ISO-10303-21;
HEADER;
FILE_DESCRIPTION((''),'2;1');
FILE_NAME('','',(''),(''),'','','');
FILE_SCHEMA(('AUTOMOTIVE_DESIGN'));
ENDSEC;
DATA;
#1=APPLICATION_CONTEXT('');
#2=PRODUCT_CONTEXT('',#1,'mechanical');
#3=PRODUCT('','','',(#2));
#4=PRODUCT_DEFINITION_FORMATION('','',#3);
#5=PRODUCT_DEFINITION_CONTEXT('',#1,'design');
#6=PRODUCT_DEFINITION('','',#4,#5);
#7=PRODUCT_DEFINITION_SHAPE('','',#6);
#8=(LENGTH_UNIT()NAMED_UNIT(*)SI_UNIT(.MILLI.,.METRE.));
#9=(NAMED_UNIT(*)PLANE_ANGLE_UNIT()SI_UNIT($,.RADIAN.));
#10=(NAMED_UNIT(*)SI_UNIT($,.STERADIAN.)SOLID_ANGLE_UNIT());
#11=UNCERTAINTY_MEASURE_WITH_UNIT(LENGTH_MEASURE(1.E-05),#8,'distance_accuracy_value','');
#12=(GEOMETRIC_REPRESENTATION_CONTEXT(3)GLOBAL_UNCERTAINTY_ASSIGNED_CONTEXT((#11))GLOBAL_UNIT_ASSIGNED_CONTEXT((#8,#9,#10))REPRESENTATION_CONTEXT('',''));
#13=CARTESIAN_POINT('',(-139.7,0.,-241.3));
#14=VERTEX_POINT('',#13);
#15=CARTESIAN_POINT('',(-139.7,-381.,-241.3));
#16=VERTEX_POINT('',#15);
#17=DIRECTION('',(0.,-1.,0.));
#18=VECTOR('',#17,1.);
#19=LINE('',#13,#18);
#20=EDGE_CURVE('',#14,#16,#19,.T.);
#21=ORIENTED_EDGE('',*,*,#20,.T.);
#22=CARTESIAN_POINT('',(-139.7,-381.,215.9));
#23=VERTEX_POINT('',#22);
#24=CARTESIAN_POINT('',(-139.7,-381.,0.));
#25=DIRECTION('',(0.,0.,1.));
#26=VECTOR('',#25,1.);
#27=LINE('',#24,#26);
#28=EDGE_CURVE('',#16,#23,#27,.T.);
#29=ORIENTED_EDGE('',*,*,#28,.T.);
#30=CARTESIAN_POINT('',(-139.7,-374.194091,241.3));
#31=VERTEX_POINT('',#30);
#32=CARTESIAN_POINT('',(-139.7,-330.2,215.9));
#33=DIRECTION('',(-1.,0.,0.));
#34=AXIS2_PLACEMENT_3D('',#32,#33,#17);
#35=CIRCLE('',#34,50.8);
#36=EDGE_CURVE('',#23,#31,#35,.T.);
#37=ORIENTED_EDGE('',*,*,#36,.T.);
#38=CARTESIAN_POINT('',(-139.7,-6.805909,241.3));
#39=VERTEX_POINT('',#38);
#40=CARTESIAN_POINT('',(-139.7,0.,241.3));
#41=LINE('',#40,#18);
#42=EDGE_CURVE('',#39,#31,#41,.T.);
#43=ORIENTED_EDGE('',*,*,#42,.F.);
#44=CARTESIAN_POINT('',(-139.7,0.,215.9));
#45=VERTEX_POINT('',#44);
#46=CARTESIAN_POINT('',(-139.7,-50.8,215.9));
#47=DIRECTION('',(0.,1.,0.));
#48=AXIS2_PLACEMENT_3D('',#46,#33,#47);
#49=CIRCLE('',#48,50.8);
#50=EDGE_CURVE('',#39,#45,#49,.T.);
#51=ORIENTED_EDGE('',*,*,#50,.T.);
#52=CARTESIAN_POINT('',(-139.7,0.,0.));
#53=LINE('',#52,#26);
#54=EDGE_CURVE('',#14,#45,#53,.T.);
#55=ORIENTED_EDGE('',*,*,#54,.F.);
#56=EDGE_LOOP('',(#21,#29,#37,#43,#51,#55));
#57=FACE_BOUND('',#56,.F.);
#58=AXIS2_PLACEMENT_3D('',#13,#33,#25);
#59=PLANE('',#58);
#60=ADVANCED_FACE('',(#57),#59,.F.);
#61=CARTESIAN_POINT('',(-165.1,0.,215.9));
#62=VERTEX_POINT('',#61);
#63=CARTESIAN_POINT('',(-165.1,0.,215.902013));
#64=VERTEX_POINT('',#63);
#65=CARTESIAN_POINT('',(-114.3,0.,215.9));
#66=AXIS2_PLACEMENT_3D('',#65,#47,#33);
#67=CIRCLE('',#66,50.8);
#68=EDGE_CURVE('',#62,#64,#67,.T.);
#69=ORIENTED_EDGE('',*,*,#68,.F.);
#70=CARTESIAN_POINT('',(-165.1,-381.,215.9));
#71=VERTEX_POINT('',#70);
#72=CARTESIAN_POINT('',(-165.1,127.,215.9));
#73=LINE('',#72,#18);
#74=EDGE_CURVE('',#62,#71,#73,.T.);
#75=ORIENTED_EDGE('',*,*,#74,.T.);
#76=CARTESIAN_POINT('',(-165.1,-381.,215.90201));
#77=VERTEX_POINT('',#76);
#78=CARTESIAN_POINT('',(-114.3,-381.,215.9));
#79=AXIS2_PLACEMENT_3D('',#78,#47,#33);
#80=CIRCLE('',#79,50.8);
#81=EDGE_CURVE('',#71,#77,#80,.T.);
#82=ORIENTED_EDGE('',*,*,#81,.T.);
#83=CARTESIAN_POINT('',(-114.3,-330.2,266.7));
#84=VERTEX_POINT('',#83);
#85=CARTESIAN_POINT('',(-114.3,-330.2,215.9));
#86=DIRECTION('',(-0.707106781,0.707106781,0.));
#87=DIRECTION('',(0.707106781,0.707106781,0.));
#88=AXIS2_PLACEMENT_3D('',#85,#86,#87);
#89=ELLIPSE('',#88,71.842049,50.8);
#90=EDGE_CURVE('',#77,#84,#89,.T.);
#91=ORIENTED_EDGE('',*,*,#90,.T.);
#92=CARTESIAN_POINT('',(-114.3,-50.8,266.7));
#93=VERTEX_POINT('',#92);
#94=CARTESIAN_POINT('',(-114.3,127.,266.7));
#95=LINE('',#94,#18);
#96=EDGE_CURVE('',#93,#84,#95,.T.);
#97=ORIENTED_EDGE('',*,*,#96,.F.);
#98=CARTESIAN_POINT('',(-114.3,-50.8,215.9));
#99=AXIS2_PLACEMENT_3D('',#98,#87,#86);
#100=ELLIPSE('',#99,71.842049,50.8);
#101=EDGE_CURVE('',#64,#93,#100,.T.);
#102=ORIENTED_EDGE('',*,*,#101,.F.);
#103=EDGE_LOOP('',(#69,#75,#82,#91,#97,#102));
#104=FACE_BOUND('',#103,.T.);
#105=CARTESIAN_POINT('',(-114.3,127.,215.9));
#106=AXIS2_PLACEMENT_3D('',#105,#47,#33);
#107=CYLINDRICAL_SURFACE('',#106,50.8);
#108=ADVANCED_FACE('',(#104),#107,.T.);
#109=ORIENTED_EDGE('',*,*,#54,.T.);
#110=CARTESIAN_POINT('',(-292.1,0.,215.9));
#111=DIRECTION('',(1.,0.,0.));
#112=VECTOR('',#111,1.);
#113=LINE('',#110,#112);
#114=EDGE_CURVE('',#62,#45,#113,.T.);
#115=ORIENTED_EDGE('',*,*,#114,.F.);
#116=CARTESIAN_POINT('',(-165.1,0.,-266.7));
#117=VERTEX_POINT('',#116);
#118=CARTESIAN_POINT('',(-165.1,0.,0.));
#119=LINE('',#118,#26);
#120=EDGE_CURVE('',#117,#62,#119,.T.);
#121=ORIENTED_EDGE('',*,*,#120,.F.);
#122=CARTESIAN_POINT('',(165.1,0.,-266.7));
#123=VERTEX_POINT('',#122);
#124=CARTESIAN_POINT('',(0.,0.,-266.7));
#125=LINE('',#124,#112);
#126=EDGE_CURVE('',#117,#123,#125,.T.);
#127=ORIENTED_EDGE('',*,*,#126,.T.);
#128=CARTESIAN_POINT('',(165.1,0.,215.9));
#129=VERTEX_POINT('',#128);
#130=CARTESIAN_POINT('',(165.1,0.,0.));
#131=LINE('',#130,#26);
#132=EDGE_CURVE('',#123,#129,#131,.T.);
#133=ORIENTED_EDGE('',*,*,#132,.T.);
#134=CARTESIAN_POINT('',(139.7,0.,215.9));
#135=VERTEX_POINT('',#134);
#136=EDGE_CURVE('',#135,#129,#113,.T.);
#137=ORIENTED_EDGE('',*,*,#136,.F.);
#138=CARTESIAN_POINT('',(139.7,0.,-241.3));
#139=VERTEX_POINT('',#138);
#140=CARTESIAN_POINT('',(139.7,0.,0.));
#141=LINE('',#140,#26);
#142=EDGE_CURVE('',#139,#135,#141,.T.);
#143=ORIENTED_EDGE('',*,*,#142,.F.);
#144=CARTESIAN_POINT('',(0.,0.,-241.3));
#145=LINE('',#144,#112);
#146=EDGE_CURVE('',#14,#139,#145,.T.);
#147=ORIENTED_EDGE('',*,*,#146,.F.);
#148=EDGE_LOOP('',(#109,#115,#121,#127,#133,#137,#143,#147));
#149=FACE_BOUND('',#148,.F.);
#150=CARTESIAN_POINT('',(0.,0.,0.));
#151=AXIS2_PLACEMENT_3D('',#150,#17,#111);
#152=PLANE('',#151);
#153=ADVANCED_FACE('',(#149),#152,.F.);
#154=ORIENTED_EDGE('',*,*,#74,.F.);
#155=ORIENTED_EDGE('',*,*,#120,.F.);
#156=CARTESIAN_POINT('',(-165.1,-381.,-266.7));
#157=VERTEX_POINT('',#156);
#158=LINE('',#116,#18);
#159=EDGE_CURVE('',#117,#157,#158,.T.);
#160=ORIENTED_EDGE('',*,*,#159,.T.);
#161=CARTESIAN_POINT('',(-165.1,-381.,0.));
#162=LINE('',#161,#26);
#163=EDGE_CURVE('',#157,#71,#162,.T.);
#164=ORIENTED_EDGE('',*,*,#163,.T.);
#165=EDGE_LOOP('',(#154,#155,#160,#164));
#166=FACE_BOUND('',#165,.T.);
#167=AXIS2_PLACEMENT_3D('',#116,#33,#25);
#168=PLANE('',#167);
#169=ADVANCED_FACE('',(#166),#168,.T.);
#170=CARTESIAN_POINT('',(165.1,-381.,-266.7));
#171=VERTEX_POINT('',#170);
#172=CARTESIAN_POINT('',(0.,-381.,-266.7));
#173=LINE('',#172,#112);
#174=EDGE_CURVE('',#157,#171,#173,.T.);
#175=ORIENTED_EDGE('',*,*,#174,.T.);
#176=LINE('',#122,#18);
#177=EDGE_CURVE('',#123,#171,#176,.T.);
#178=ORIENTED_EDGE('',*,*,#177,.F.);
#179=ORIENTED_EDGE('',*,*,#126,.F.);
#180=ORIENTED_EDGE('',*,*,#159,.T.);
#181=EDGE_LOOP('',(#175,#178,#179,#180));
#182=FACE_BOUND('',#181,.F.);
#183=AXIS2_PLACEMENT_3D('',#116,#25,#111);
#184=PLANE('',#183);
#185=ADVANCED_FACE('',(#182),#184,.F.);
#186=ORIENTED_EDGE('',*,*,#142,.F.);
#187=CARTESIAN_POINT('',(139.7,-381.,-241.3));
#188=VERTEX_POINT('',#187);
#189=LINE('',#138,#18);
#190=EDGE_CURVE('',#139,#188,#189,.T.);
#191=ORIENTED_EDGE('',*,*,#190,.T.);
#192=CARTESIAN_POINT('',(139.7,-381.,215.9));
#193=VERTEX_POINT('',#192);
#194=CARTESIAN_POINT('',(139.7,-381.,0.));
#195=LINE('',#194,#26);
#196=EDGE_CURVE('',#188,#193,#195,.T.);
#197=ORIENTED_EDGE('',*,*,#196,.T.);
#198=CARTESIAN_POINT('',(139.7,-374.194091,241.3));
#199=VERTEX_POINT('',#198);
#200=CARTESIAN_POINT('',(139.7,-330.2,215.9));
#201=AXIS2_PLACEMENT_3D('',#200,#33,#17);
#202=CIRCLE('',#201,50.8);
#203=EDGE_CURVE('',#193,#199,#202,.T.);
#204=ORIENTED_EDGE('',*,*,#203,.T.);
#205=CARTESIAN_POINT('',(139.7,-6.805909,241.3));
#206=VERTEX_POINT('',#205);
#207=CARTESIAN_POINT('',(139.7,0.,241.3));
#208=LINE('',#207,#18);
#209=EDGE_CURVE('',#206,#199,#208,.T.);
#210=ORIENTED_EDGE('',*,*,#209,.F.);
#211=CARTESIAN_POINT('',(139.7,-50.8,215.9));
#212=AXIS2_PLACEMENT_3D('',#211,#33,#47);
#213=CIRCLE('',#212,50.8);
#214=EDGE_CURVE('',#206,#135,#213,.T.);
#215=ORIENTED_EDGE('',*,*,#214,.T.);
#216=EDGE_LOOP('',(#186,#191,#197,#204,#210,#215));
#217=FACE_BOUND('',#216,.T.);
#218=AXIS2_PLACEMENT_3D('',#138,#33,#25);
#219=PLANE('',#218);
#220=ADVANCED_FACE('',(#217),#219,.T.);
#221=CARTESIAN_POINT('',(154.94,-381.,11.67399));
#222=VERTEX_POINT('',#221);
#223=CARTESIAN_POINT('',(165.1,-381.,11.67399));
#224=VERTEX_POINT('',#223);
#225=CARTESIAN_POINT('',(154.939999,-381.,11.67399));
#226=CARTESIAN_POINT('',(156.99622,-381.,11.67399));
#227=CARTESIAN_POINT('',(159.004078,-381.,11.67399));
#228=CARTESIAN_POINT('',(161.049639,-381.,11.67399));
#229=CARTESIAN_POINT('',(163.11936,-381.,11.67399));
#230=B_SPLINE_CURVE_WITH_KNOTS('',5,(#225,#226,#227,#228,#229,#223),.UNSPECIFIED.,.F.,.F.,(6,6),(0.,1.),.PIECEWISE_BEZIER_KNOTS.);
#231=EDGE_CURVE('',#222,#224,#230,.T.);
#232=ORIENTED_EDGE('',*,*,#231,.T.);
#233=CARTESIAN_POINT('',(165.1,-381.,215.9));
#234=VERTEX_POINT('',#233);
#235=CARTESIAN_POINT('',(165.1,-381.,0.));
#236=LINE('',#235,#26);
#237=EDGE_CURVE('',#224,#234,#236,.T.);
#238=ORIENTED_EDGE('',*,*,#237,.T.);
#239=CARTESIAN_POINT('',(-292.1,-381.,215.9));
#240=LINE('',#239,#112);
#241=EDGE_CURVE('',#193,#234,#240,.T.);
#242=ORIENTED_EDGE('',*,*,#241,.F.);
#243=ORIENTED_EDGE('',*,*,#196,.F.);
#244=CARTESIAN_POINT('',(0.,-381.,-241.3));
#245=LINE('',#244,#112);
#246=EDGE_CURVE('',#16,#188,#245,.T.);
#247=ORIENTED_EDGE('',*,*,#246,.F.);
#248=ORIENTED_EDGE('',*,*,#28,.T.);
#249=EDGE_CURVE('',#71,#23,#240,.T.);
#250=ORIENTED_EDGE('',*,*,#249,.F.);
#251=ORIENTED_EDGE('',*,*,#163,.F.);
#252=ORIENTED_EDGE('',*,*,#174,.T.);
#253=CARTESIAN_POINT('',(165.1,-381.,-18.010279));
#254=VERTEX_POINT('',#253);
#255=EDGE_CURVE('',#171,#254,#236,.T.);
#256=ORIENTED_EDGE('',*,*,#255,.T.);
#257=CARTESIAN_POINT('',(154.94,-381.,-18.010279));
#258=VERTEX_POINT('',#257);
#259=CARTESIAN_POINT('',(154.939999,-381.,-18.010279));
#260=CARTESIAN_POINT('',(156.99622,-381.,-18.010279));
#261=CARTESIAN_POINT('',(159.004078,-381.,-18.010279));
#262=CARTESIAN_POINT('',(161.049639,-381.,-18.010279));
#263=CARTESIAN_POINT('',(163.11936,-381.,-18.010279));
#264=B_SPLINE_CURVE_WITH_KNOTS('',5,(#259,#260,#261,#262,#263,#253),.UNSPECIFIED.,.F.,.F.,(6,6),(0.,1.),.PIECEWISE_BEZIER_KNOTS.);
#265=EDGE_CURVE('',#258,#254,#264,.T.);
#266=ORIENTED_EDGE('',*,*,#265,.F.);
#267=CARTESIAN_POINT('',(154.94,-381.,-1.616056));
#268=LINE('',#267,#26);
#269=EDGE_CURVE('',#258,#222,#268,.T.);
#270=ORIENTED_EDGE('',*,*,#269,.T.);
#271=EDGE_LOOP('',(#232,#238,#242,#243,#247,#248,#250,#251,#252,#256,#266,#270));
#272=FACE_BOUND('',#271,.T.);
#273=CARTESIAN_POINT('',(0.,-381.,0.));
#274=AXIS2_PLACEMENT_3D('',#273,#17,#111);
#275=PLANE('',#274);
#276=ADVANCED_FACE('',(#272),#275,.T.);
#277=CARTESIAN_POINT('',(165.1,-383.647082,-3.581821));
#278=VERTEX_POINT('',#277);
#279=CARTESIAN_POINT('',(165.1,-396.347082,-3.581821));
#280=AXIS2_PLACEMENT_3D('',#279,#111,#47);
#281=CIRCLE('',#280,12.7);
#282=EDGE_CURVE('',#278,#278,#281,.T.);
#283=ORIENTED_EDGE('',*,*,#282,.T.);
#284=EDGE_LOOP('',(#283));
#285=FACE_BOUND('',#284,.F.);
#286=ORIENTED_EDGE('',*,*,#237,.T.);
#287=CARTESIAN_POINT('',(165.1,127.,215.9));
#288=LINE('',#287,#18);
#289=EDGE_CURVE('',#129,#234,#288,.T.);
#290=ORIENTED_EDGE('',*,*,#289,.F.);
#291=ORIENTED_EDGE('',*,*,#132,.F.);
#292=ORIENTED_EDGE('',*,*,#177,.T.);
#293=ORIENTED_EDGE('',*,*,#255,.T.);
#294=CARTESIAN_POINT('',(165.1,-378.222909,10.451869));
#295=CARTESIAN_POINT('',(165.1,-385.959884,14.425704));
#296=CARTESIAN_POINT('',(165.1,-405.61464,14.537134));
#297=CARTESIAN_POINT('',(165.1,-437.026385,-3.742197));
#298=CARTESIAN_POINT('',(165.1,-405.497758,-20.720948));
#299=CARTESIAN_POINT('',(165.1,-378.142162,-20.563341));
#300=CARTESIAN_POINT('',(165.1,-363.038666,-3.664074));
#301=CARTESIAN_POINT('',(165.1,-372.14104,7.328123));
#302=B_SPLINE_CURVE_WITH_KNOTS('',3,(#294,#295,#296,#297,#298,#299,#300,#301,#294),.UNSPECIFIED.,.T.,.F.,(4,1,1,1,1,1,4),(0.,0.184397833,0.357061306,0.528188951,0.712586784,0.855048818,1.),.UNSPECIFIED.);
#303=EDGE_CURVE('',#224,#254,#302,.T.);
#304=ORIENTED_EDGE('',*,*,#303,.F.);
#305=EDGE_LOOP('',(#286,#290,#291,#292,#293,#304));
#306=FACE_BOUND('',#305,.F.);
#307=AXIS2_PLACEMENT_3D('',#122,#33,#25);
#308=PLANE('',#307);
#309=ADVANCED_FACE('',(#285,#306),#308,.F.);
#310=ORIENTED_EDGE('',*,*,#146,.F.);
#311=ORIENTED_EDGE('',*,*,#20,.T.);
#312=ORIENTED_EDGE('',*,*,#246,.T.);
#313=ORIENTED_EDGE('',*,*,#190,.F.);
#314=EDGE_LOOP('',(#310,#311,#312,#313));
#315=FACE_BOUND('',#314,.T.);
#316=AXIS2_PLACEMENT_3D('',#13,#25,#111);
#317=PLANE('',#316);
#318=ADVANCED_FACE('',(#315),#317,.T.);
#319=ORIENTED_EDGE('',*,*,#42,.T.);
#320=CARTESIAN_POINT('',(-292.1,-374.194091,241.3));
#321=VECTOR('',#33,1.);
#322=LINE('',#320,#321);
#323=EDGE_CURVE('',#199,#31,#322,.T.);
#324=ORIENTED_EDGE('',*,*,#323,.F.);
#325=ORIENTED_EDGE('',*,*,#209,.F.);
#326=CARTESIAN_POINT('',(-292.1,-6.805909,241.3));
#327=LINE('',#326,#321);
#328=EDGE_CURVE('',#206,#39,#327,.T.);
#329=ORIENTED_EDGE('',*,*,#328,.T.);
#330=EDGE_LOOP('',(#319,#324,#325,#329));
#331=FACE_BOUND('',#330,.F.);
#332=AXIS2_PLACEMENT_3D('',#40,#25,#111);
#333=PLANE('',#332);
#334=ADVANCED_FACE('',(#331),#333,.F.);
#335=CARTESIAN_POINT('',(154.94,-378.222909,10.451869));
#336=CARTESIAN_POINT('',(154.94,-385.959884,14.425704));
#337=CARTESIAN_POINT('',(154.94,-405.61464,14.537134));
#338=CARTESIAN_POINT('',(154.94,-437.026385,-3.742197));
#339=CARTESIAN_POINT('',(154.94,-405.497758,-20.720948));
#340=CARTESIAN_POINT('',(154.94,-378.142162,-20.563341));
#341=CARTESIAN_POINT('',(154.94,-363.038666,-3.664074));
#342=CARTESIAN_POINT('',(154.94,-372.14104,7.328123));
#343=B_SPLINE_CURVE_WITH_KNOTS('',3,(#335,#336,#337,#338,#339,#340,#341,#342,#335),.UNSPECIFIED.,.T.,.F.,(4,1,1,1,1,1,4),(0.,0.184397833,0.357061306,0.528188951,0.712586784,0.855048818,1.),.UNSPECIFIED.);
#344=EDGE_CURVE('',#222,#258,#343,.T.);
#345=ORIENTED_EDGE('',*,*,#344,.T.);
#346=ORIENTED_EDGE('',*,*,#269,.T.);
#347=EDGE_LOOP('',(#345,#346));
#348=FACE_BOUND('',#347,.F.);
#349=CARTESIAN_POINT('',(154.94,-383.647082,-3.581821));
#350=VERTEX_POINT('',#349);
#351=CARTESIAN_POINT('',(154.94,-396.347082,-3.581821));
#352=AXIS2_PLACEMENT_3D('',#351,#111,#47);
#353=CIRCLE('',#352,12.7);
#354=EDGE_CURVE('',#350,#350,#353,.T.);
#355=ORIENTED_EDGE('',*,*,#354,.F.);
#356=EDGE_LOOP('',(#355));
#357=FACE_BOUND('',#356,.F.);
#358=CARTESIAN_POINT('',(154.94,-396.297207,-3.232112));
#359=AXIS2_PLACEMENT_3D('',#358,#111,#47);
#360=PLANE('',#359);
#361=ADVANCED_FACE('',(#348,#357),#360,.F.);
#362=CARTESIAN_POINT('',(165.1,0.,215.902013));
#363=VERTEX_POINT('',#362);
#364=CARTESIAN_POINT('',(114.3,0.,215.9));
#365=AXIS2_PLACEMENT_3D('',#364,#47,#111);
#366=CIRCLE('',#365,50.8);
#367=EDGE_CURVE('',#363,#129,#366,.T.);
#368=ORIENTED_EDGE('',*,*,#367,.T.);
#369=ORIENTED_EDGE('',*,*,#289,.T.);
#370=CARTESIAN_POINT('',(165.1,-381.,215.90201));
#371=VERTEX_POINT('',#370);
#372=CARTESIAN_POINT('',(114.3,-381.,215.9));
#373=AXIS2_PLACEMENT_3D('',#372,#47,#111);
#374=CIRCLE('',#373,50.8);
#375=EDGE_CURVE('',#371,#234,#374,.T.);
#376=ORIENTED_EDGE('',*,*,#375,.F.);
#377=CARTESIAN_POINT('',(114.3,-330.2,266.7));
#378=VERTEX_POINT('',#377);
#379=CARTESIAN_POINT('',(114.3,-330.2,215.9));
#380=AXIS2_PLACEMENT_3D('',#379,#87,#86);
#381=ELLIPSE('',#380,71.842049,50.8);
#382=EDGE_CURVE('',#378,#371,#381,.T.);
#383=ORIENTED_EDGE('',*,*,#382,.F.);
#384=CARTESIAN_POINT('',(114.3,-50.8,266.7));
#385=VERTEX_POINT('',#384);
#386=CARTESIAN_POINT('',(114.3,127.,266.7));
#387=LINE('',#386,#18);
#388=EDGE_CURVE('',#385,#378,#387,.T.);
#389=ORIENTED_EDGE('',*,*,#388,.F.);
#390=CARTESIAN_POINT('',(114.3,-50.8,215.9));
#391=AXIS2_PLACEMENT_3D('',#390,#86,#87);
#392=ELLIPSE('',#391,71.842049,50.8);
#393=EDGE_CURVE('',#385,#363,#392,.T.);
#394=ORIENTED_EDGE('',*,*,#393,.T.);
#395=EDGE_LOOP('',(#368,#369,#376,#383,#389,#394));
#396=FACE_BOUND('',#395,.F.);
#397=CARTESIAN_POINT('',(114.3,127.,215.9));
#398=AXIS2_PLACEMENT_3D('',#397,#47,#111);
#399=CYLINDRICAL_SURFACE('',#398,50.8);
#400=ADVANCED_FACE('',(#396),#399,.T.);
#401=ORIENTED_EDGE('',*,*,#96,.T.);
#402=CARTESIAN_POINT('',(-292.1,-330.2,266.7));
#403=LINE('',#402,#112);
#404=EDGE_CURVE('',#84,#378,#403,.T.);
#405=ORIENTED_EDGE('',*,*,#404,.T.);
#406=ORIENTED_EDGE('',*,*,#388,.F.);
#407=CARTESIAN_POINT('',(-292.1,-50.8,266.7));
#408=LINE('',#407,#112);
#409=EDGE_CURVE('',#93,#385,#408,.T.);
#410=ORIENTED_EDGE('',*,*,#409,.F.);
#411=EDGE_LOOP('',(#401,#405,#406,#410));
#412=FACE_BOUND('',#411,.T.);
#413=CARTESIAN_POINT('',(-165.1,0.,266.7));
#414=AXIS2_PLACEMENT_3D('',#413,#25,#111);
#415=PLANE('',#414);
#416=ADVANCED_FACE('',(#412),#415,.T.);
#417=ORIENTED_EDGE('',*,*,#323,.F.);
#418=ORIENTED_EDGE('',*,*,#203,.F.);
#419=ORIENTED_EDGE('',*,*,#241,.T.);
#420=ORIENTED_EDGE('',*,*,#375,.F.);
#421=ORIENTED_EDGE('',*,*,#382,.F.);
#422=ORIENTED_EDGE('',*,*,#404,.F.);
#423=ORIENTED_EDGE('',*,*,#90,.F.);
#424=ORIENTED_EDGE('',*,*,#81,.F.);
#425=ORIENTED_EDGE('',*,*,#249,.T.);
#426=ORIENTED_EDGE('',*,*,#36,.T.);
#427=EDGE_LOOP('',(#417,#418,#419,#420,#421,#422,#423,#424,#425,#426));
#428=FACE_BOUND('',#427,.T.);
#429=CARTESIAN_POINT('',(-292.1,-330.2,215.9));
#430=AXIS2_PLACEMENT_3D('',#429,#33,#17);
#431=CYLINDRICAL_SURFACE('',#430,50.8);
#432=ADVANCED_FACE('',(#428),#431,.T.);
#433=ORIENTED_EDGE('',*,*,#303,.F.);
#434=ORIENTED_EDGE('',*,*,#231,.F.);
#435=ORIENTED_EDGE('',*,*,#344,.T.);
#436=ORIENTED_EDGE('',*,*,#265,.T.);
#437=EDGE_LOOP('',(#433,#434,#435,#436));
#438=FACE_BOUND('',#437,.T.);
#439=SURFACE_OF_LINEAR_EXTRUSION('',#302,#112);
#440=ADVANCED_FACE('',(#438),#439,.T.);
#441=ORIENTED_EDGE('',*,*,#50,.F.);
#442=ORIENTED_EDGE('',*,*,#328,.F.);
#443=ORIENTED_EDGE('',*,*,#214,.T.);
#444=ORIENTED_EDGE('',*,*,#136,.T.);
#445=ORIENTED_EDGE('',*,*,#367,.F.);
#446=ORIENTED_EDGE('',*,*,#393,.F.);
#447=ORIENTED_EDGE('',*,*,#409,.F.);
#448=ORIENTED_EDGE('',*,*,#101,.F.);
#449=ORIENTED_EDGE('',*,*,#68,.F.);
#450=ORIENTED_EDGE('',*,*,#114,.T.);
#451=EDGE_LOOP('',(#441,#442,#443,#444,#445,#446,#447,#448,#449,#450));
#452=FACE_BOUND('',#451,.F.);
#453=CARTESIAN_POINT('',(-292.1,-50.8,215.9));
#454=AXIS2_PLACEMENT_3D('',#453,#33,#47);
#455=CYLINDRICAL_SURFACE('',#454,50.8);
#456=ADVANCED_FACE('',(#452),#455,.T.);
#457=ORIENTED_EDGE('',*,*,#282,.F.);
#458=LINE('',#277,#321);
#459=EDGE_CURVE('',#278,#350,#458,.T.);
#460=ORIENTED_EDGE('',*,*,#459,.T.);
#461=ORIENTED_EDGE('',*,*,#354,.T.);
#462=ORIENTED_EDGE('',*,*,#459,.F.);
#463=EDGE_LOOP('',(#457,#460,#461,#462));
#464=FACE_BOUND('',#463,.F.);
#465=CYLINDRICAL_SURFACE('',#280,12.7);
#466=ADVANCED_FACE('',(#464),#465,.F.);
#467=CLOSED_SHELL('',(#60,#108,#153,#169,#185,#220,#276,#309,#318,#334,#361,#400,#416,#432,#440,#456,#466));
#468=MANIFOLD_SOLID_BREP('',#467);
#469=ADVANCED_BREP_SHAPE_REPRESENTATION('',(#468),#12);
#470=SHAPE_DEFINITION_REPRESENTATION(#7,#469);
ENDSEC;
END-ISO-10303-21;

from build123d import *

# Parameters (mm, degrees)
F0_W        = 330.2
F0_H        = 533.4
F0_W_2      = 279.4
F0_H_2      = 482.6
F1_DEPTH    = 381
F2_R        = 12.7
F3_DEPTH    = 10.16
F4_T1_DEPTH = 635
F4_T3_DEPTH = 584.2


# Not quite as in the source:
# - a fillet or chamfer that OpenCascade refuses, or shapes differently, is made with other operations: its cross-section is extruded or revolved along the edge and cut away or added


with BuildPart() as f1:
    # F0 (on Front) → F1 (new body)
    with BuildSketch(Plane.XZ):
        Rectangle(F0_W, F0_H)
        Rectangle(F0_W_2, F0_H_2, mode=Mode.SUBTRACT)
    extrude(amount=F1_DEPTH)

    # F2 (on face) → F3 (join)
    with BuildSketch(Plane.YZ.offset(165.1)):
        with BuildLine():
            add(Edge.make_bspline(
                [(-378.2229094568, 10.4518691667), (-385.9598838993, 14.4257039209), (-405.6146401633, 14.5371341372), (-437.0263849997, -3.7421973966), (-405.4977582368, -20.7209483443), (-378.1421616626, -20.5633411646), (-363.038665815, -3.6640736551), (-372.1410397823, 7.3281228932), (-378.2229094568, 10.4518691667)],
                knots=[0, 0, 0, 0, 0.1843978335, 0.3570613059, 0.5281889509, 0.7125867844, 0.8550488179, 1, 1, 1, 1], degree=3))
        make_face()
        with Locations((-396.3470816139, -3.5818209283)):
            Circle(F2_R, mode=Mode.SUBTRACT)
    extrude(amount=-F3_DEPTH)

    # F4: fillet of radius 50.8 on 4 edges, made by hand

    # F4_s2 → F4_t1 (cut)
    with BuildSketch(Plane.XZ.offset(-127)):
        with BuildLine():
            ThreePointArc((165.1, 215.9), (150.2210244843, 251.8210244843), (114.3, 266.7))
            Line((114.3, 266.7), (165.1, 266.7))
            Line((165.1, 266.7), (165.1, 215.9))
        make_face()
        with BuildLine():
            ThreePointArc((-165.1, 215.9), (-150.2210244843, 251.8210244843), (-114.3, 266.7))
            Line((-114.3, 266.7), (-165.1, 266.7))
            Line((-165.1, 266.7), (-165.1, 215.9))
        make_face()
    extrude(amount=F4_T1_DEPTH, mode=Mode.SUBTRACT)

    # F4_s4 → F4_t3 (cut)
    with BuildSketch(Plane.YZ.offset(-292.1)):
        with BuildLine():
            ThreePointArc((0, 215.9), (-14.8789755157, 251.8210244843), (-50.8, 266.7))
            Line((-50.8, 266.7), (0, 266.7))
            Line((0, 266.7), (0, 215.9))
        make_face()
        with BuildLine():
            ThreePointArc((-381, 215.9), (-366.1210244843, 251.8210244843), (-330.2, 266.7))
            Line((-330.2, 266.7), (-381, 266.7))
            Line((-381, 266.7), (-381, 215.9))
        make_face()
    extrude(amount=F4_T3_DEPTH, mode=Mode.SUBTRACT)


solid = f1.part
